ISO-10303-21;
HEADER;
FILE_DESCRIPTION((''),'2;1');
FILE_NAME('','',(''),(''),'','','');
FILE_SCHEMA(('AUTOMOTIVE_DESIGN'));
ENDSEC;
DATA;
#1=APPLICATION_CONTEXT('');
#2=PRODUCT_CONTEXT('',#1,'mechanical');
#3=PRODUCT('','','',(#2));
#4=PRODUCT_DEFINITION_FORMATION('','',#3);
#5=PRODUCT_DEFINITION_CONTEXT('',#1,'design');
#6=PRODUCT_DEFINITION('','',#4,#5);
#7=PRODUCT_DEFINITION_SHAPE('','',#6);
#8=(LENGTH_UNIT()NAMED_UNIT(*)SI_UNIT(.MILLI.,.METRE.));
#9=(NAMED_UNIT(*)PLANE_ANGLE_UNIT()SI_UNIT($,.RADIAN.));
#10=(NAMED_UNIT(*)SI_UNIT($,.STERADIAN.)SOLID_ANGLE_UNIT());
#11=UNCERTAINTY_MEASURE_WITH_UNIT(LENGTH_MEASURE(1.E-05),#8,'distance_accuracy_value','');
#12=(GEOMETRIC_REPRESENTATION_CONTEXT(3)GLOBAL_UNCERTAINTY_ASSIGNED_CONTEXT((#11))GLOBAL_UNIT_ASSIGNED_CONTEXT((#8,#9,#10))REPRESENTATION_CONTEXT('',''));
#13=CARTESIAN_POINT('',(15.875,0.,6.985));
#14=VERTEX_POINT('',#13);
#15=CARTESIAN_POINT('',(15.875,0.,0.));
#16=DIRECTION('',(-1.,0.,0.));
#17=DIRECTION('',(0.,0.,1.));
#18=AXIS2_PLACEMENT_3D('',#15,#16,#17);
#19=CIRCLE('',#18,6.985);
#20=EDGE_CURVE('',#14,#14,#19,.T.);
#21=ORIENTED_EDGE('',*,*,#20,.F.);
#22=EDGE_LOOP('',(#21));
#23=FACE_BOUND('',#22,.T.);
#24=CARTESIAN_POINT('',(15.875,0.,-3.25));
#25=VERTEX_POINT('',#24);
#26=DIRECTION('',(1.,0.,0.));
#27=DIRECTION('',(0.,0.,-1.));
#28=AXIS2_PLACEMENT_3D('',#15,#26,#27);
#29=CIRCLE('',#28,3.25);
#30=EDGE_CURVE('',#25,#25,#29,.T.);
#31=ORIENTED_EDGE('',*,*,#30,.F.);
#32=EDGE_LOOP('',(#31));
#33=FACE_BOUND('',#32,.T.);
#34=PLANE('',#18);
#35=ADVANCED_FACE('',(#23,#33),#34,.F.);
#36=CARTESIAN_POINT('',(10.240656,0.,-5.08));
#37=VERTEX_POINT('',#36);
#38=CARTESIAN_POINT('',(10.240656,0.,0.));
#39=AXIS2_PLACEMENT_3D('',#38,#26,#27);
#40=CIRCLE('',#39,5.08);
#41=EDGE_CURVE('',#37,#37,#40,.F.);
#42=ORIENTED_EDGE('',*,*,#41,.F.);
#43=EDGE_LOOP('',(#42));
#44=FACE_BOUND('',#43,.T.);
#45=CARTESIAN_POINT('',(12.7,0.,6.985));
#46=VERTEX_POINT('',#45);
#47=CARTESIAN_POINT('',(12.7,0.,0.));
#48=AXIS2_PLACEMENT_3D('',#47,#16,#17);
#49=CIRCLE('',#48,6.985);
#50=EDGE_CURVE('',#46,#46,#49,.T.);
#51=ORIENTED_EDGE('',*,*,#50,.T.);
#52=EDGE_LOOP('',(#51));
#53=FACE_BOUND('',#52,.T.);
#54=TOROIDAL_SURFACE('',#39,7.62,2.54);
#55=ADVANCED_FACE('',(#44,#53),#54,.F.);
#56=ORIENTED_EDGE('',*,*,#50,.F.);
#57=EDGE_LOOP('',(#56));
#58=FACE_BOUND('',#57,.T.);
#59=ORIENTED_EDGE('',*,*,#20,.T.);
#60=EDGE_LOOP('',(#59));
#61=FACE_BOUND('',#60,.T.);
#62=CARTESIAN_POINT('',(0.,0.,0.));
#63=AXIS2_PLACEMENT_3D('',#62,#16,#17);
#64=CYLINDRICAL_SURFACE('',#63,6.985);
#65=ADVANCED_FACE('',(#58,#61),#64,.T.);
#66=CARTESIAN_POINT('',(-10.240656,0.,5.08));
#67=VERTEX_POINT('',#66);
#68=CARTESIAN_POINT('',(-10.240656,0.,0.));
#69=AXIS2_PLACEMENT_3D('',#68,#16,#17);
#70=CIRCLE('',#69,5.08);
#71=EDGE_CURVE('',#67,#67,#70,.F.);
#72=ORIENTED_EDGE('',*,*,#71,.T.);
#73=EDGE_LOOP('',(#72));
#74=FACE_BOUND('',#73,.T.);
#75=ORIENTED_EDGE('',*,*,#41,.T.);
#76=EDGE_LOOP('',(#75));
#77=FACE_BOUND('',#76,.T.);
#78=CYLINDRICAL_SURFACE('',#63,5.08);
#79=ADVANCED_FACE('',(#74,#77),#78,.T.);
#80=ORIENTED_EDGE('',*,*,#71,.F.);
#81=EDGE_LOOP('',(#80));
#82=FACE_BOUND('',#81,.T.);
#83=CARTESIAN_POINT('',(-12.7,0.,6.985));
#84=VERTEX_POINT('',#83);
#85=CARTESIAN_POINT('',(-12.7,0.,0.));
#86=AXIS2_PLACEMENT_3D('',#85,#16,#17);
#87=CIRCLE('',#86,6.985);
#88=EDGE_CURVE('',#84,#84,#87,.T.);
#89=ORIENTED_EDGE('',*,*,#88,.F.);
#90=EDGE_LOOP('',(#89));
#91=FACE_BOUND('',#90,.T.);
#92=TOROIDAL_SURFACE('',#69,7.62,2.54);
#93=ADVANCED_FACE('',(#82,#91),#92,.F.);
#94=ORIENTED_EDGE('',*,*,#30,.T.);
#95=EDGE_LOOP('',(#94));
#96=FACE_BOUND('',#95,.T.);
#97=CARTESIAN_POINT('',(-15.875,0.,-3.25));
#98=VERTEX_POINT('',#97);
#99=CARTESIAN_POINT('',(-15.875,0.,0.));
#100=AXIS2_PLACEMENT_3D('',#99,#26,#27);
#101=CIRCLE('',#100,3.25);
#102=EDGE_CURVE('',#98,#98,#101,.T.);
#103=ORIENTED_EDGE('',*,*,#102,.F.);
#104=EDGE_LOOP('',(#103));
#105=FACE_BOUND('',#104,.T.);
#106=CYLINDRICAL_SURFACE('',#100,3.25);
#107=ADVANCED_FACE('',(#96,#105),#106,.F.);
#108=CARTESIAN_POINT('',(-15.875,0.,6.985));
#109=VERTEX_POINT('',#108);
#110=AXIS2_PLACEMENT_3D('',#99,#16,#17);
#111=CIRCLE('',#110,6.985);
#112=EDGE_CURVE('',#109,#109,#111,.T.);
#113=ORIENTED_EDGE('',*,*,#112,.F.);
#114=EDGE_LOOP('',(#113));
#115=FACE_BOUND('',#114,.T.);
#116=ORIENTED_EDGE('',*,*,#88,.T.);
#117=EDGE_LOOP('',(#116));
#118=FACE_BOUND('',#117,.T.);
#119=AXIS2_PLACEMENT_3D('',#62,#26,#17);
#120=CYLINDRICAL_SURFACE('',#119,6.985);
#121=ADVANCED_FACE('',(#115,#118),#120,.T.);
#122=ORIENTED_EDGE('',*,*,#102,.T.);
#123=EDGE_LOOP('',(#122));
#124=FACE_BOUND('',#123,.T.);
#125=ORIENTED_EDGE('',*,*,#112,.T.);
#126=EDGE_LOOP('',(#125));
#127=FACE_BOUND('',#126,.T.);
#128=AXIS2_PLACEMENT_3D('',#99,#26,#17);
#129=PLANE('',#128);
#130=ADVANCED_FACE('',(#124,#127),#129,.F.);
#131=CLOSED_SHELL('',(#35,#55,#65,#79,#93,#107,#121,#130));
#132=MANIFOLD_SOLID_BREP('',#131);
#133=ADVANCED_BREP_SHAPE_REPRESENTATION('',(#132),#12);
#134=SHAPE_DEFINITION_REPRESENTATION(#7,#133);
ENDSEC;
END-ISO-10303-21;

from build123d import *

# Parameters (mm, degrees)
FILLET1_R          = 2.54
SKETCH2_R          = 3.25
CUT_EXTRUDE1_DEPTH = 34.251209752


with BuildPart() as part:
    # Sketch1 → Revolve1 (revolve)
    with BuildSketch(Plane.XY, mode=Mode.PRIVATE) as revolve1_sk:
        Polygon((15.875, 0), (15.875, 6.985), (12.7, 6.985), (12.7, 5.08), (0, 5.08), (0, 0), align=None)
    revolve1 = revolve(revolve1_sk.sketch.rotate(Axis((0, 0, 0), (1, 0, 0)), 90), axis=Axis((0, 0, 0), (1, 0, 0)))

    # Mirror1: Revolve1 across plane
    add(revolve1.mirror(Plane(origin=(0, 0, 0), x_dir=(0, 0, 1), z_dir=(1, 0, 0))))

    # Fillet1
    # the kernel refuses this fillet: 2.54 mm, written as the material it adds along each edge
    with BuildSketch(Plane(origin=(-12.7, 0, 0), x_dir=(0, 0, 1), z_dir=(0, 1, 0))) as fillet1_piece_1:
        with BuildLine():
            CenterArc((7.62, 2.459344425), FILLET1_R, 180, 75.522487814)
            Line((6.985, 0), (6.9723, -0.049186888))
            ThreePointArc((6.9723, -0.049186888), (6.0325, -0.0508), (5.08, -0.0508))
            Line((5.08, -0.0508), (5.0292, 0))
            Line((5.0292, 0), (5.0292, 2.459344425))
            Line((5.0292, 2.459344425), (5.08, 2.459344425))
        make_face()
    revolve(axis=Axis((-12.7, 0, 0), (1, 0, 0)))
    with BuildSketch(Plane(origin=(12.7, 0, 0), x_dir=(0, 0, 1), z_dir=(0, 1, 0))) as fillet1_piece_2:
        with BuildLine():
            CenterArc((7.62, -2.459344425), FILLET1_R, 104.477512186, 75.522487814)
            Line((5.08, -2.459344425), (5.0292, -2.459344425))
            Line((5.0292, -2.459344425), (5.0292, 0))
            Line((5.0292, 0), (5.08, 0.0508))
            ThreePointArc((5.08, 0.0508), (6.0325, 0.0508), (6.9723, 0.049186888))
            Line((6.9723, 0.049186888), (6.985, 0))
        make_face()
    revolve(axis=Axis((12.7, 0, 0), (1, 0, 0)))

    # Sketch2 → Cut-Extrude1 (cut, through all)
    with BuildSketch(Plane(origin=(15.875, 0, 0), x_dir=(0, 0, -1), z_dir=(1, 0, 0))):
        Circle(SKETCH2_R)
    extrude(amount=-CUT_EXTRUDE1_DEPTH, mode=Mode.SUBTRACT)


solid = part.part
